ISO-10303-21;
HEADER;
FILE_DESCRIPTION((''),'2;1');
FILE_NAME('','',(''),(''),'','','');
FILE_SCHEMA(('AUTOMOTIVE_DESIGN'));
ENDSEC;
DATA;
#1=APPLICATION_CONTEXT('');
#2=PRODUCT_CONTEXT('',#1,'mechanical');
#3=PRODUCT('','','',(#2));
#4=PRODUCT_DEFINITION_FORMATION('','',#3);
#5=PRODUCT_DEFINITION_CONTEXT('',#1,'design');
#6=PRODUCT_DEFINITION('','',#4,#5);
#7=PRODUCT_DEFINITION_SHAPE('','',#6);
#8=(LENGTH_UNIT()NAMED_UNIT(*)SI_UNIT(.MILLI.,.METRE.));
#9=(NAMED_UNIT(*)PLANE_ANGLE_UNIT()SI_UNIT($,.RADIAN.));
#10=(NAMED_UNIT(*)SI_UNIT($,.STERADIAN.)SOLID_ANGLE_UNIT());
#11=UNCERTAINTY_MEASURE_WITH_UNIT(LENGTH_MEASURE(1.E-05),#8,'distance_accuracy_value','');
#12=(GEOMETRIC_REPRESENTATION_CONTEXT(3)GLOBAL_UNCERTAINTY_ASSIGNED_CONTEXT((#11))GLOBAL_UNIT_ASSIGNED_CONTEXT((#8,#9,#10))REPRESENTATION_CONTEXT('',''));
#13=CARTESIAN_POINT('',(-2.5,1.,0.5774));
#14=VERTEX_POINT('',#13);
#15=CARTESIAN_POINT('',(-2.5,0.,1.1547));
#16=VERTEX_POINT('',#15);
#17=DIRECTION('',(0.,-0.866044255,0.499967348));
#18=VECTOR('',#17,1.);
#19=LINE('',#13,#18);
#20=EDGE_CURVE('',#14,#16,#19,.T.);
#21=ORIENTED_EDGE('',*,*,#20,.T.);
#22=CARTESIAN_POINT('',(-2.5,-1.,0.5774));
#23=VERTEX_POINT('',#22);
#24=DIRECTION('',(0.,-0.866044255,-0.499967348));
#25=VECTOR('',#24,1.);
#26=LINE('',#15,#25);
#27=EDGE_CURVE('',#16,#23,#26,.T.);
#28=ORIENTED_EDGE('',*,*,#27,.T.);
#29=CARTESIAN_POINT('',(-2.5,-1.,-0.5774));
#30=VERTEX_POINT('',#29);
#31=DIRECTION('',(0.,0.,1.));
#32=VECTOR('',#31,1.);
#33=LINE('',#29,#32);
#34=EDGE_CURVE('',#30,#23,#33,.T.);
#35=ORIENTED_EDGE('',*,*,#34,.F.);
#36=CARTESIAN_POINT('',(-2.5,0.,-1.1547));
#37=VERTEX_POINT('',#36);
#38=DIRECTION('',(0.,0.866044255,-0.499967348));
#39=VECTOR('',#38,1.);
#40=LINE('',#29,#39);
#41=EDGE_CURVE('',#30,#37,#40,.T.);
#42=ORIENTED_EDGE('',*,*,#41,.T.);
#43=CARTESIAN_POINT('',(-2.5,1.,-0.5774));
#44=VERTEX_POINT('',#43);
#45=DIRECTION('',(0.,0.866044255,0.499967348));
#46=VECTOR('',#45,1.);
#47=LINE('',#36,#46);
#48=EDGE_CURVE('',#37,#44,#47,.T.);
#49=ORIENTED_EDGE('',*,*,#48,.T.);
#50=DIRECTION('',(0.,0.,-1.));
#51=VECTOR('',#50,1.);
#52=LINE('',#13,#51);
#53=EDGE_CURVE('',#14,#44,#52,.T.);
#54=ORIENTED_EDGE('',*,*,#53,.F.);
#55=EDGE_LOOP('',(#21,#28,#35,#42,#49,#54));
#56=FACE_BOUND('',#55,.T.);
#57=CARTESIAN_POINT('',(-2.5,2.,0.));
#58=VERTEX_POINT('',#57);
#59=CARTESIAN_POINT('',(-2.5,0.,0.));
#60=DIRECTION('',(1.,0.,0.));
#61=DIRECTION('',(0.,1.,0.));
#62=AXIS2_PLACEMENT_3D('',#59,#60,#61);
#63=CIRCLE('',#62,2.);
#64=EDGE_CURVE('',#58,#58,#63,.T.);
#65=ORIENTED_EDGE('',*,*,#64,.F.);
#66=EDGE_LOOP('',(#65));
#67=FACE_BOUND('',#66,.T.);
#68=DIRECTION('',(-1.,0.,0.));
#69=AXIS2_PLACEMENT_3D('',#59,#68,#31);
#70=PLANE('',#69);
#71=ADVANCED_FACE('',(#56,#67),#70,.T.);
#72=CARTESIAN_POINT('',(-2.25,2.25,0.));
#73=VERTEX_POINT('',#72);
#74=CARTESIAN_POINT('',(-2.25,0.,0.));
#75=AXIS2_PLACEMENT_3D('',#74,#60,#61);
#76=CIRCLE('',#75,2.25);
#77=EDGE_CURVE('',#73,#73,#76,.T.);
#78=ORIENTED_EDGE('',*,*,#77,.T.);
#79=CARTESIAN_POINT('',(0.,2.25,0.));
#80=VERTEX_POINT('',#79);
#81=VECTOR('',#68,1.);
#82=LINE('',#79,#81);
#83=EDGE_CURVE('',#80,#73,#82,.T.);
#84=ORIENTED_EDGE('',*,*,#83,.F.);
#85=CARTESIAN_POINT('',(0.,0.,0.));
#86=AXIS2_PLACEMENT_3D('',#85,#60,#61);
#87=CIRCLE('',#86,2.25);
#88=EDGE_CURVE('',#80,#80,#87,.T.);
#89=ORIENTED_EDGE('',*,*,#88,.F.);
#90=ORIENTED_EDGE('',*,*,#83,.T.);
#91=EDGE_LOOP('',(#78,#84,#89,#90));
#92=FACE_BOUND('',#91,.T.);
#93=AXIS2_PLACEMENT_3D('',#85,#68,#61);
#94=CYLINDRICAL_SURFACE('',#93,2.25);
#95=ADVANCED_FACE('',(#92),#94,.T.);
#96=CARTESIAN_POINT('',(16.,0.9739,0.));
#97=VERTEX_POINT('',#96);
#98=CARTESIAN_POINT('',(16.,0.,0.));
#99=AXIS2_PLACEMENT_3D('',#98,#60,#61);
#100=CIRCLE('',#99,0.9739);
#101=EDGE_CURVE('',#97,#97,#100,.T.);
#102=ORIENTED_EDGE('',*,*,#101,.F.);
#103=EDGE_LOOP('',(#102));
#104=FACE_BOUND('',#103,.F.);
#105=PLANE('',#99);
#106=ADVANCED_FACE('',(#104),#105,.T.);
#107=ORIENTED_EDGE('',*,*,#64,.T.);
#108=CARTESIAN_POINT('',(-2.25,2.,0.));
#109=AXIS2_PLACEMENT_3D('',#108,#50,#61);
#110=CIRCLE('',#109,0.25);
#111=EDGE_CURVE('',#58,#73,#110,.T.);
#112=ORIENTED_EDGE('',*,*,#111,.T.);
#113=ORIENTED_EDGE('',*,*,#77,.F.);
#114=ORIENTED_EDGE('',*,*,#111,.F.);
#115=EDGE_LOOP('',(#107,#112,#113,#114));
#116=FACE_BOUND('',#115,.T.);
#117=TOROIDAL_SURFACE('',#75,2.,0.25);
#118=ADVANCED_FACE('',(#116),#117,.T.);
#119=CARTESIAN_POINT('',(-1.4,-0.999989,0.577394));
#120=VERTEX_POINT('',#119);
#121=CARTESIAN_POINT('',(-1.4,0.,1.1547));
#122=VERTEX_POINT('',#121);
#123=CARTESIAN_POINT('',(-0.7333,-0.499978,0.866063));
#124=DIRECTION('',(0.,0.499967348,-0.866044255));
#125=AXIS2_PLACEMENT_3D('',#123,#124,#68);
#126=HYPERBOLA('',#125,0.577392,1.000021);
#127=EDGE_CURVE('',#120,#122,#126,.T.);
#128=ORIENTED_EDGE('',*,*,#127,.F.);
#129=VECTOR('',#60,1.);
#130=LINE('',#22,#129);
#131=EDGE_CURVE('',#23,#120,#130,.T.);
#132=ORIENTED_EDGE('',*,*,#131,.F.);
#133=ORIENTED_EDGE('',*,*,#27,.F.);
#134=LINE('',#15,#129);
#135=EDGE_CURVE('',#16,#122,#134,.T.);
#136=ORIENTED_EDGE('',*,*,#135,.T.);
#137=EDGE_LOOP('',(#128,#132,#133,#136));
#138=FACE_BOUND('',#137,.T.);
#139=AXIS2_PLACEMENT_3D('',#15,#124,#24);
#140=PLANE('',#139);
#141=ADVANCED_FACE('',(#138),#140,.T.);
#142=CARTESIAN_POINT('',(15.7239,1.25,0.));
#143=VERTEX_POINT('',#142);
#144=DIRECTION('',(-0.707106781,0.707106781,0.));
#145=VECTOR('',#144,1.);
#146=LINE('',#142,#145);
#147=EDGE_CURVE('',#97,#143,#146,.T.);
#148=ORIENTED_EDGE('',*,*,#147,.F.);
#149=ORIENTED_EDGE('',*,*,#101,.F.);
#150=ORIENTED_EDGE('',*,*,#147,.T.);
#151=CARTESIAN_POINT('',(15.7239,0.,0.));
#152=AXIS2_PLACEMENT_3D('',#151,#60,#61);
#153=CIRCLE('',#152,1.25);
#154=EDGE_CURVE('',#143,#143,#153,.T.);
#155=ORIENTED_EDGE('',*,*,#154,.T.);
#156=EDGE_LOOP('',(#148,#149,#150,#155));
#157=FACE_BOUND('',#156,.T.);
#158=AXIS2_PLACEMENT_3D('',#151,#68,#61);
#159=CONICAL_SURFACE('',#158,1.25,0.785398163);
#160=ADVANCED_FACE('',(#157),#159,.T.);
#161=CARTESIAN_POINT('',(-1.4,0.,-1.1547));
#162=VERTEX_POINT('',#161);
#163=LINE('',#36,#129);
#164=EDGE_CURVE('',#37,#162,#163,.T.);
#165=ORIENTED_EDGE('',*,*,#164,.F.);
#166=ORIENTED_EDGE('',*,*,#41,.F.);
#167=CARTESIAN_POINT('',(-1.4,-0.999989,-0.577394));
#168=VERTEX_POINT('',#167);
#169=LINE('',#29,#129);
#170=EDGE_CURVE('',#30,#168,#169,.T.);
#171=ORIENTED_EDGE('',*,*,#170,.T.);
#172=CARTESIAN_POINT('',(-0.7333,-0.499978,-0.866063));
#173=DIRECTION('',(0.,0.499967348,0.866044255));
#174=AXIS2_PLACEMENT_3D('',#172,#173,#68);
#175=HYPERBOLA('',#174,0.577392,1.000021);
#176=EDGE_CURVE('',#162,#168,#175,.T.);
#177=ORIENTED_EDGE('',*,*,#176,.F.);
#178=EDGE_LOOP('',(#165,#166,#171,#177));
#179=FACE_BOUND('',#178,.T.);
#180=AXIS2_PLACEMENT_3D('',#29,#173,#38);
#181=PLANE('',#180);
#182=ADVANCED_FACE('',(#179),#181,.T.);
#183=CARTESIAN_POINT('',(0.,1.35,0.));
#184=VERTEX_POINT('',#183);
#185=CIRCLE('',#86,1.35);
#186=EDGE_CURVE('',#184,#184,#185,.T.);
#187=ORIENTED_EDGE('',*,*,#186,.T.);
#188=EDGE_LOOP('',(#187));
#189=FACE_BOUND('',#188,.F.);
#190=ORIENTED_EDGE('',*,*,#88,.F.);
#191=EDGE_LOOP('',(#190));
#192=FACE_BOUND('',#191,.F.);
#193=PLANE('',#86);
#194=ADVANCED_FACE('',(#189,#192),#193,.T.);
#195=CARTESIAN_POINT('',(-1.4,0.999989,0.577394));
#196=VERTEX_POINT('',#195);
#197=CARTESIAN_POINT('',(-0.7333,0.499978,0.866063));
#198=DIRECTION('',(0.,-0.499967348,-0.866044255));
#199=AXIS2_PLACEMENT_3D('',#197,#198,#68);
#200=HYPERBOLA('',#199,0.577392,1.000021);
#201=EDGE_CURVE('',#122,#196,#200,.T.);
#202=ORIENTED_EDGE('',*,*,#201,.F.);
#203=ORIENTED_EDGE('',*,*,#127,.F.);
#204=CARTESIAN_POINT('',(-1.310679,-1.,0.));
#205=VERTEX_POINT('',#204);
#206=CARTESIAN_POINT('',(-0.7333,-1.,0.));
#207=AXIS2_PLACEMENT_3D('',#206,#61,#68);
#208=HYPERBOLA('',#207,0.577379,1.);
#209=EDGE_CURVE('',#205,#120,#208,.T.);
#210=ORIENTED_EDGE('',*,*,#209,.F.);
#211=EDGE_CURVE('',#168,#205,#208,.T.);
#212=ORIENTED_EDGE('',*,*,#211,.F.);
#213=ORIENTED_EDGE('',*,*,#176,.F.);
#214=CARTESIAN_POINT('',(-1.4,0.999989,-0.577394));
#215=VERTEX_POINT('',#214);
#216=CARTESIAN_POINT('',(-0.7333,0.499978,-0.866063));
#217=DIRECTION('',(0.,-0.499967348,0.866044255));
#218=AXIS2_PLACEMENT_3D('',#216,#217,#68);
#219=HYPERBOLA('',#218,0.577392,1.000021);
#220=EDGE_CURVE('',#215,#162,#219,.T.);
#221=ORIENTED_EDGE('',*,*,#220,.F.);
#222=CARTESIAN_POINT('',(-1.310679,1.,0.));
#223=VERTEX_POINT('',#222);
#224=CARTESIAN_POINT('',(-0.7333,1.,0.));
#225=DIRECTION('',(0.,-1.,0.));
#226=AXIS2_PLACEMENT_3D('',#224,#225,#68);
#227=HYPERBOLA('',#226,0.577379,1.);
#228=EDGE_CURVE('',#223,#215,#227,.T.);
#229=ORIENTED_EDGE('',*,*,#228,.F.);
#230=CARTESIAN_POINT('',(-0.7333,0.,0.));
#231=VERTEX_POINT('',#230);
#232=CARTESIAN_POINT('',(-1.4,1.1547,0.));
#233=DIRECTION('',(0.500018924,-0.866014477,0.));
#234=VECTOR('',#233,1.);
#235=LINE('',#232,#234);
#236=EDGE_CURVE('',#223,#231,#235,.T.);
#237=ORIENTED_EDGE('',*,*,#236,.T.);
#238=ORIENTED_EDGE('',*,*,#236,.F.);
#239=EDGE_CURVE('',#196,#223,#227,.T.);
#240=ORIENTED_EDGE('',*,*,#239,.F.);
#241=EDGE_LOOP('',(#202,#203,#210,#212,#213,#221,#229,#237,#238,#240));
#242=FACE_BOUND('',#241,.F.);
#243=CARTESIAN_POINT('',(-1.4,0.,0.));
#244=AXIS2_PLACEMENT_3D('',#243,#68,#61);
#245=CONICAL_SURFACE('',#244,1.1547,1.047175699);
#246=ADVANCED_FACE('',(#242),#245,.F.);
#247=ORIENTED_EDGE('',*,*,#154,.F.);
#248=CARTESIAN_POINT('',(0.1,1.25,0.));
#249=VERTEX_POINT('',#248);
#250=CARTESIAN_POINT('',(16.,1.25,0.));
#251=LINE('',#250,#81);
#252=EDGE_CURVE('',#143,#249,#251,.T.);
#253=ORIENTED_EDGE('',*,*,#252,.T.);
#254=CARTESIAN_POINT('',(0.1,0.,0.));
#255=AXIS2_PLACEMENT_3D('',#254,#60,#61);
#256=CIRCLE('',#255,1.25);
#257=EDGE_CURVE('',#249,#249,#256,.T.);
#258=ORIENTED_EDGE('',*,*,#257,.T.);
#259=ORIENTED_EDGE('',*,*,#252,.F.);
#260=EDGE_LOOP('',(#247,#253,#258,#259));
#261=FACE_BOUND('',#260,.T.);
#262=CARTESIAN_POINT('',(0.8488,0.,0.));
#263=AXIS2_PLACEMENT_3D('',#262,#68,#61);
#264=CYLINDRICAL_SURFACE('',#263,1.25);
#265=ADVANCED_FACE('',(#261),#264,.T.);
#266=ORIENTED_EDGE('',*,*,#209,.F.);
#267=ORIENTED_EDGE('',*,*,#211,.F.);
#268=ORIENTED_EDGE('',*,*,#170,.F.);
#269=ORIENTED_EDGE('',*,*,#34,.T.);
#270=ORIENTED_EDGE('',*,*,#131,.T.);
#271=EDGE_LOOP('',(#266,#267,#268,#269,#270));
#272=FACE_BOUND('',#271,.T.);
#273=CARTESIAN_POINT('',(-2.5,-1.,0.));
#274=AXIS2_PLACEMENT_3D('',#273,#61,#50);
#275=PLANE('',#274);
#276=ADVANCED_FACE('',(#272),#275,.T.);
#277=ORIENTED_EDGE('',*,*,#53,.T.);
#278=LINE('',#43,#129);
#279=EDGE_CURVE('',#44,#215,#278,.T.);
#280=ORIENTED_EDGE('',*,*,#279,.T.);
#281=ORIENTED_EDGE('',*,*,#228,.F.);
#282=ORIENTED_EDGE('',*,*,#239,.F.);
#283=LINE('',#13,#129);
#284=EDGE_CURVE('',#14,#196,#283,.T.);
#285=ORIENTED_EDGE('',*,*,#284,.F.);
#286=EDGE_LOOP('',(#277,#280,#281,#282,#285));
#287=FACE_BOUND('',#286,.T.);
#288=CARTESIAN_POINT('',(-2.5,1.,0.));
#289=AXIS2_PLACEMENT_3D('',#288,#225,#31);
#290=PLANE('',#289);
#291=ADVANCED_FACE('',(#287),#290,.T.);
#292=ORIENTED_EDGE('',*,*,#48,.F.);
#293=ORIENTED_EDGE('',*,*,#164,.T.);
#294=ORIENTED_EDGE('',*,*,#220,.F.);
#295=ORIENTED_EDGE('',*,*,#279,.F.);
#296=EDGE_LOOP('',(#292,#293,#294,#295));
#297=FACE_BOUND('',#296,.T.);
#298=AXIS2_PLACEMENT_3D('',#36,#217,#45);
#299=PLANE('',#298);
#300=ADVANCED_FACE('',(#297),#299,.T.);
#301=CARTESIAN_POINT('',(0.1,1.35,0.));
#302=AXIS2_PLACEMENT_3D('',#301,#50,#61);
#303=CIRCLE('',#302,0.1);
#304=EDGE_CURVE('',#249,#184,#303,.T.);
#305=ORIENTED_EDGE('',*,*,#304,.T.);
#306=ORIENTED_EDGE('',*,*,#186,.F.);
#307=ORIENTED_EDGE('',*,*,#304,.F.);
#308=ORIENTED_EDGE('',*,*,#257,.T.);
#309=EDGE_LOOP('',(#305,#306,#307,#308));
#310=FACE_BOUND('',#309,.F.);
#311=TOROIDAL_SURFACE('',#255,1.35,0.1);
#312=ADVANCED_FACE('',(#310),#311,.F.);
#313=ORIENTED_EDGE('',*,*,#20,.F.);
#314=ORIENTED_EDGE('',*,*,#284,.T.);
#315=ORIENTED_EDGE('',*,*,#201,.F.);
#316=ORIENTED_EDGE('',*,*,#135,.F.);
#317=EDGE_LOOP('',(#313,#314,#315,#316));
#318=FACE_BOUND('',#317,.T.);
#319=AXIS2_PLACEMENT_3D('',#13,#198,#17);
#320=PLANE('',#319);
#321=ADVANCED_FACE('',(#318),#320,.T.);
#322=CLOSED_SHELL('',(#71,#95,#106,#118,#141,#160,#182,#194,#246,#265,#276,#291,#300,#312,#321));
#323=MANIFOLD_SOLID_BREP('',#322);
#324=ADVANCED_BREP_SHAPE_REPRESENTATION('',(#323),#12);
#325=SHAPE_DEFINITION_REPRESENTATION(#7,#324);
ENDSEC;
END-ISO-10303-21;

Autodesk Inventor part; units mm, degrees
ref_plane "YZ Plane" through (0, 0, 0) normal (1, 0, 0) x (0, 1, 0)
ref_plane "XZ Plane" through (0, 0, 0) normal (0, 1, 0) x (-1, 0, 0)
sketch "Skizze1" plane through (0, 0, 0) normal (0, 0, 1) x (1, 0, 0)
  line L0 (-0.7333, 0) -> (16, 0)
  line L1 (16, 0) -> (16, 1.25)
  line L2 (16, 1.25) -> (1.125, 1.25)
  line L3 (1.125, 1.25) -> (0.8488, 1.25)
  line L4 (0.8488, 1.25) -> (0, 1.25)
  line L5 (0, 1.25) -> (0, 2.25)
  line L6 (0, 2.25) -> (-2.5, 2.25)
  line L7 (-2.5, 2.25) -> (-2.5, 1.1547)
  line L8 (-2.5, 1.1547) -> (-1.4, 1.1547)
  line L9 (-1.4, 1.1547) -> (-0.7333, 0)
  line L10 (-6.2, 0) -> (19.7, 0) projected
  line L11 (0, -0.45) -> (0, 2.7) projected
  line L12 (1.125, 1.25) -> (0, 1.25) construction
  dimension "d1" = 14.875
  dimension "d2" = 0.2762
  dimension "d3" = 2.5
  dimension "d4" = 1.1
  dimension "d5" = 60
  dimension "d6" = 2.5
  dimension "d7" = 2.5
  dimension "d8" = 2.3094
  dimension "d9" = 4.5
  dimension "d26" = 16
revolve "Körper" add sketch "Skizze1" angle 360 about axis through (-0.7333, 0, 0) along (1, 0, 0)
sketch "Skizze2" plane through (-2.5, 0, 0) normal (-1, 0, 0) x (0, 0, 1)
  circle A0 centre (0, 0) radius 1.1547 projected
  line L0 (0, -3.15) -> (0, 3.15) projected
  line L1 (-3.15, 0) -> (3.15, 0) projected
  line L2 (1.1547, 0) -> (0.5774, -1)
  line L3 (0.5774, -1) -> (-0.5774, -1)
  line L4 (-0.5774, -1) -> (-1.1547, 0)
  line L5 (-1.1547, 0) -> (-0.5774, 1)
  line L6 (-0.5774, 1) -> (0.5774, 1)
  line L7 (0.5774, 1) -> (1.1547, 0)
extrude "Loch" add sketch "Skizze2" against normal up to next contours L7 A0 | A0 L2 | L6 L0 A0 | A0 L0 L3 | L0 L6 A0 | A0 L3 L0 | L4 A0 | A0 L5
fillet "Rundung1" radius 0.25 1 edges at (-2.5, -2.25, 0)
thread "Gewinde" size "M2.5x0.45" class "6g" standard "ISO Metric profile" length 14.875
chamfer "Fase1" distance 0.2761 distance2 0.2761 1 edges at (16, -1.25, 0) measured on face at (16, -0.3871, -0.3429)
ref_plane "Work Plane1" through (29, 0, 0) normal (0, -1, 0) x (1, 0, 0)
fillet "Fillet2" radius 0.1 1 edges at (0, -1.25, 0)
equation "\"d1\" = GEL"
equation "\"d3\" = KOH"
equation "\"d4\" = INTI"
equation "\"d6\" = GD"
equation "\"d7\" = BDM"
equation "\"d8\" = 1.1547 * SW"
equation "\"d9\" = KOD"
equation "\"d26\" = NLG"
equation "\"d30\" = R"
equation "\"d17\" = RR"
equation "\"d13\" = GEL"
equation "\"d15\" = -0.5 * SPD + 0.5 * GD"
equation "\"d16\" = GUL"
equation "\"GD\" = 2.5"
equation "\"NLG\" = 16"
equation "\"GEL\" = 14.875"
equation "\"KOD\" = 4.5"
equation "\"KOH\" = 2.5"
equation "\"INTI\" = 1.1"
equation "\"GAL\" = 0.61345 * PTC"
equation "\"GUL\" = 0.61345 * PTC"
equation "\"BDM\" = NND"
equation "\"SW\" = 2"
equation "\"RR\" = 0.25"
equation "\"SPD\" = NND - 1.2269 * PTC"
equation "\"R\" = 0.1"
equation "\"TOA\" = 30deg"
equation "\"GD1\" = THREADDIA - 1.2269 * PTC"
equation "\"THREADDIA\" = 2.5"
equation "\"FAWI\" = 45deg"
equation "\"PTC\" = 0.45"
equation "\"NND\" = 2.5"
equation "\"E0\" = 1.155 * SW"
properties part number "ISO 4762 - M2,5 x 16" material "Edelstahl, 440C"
